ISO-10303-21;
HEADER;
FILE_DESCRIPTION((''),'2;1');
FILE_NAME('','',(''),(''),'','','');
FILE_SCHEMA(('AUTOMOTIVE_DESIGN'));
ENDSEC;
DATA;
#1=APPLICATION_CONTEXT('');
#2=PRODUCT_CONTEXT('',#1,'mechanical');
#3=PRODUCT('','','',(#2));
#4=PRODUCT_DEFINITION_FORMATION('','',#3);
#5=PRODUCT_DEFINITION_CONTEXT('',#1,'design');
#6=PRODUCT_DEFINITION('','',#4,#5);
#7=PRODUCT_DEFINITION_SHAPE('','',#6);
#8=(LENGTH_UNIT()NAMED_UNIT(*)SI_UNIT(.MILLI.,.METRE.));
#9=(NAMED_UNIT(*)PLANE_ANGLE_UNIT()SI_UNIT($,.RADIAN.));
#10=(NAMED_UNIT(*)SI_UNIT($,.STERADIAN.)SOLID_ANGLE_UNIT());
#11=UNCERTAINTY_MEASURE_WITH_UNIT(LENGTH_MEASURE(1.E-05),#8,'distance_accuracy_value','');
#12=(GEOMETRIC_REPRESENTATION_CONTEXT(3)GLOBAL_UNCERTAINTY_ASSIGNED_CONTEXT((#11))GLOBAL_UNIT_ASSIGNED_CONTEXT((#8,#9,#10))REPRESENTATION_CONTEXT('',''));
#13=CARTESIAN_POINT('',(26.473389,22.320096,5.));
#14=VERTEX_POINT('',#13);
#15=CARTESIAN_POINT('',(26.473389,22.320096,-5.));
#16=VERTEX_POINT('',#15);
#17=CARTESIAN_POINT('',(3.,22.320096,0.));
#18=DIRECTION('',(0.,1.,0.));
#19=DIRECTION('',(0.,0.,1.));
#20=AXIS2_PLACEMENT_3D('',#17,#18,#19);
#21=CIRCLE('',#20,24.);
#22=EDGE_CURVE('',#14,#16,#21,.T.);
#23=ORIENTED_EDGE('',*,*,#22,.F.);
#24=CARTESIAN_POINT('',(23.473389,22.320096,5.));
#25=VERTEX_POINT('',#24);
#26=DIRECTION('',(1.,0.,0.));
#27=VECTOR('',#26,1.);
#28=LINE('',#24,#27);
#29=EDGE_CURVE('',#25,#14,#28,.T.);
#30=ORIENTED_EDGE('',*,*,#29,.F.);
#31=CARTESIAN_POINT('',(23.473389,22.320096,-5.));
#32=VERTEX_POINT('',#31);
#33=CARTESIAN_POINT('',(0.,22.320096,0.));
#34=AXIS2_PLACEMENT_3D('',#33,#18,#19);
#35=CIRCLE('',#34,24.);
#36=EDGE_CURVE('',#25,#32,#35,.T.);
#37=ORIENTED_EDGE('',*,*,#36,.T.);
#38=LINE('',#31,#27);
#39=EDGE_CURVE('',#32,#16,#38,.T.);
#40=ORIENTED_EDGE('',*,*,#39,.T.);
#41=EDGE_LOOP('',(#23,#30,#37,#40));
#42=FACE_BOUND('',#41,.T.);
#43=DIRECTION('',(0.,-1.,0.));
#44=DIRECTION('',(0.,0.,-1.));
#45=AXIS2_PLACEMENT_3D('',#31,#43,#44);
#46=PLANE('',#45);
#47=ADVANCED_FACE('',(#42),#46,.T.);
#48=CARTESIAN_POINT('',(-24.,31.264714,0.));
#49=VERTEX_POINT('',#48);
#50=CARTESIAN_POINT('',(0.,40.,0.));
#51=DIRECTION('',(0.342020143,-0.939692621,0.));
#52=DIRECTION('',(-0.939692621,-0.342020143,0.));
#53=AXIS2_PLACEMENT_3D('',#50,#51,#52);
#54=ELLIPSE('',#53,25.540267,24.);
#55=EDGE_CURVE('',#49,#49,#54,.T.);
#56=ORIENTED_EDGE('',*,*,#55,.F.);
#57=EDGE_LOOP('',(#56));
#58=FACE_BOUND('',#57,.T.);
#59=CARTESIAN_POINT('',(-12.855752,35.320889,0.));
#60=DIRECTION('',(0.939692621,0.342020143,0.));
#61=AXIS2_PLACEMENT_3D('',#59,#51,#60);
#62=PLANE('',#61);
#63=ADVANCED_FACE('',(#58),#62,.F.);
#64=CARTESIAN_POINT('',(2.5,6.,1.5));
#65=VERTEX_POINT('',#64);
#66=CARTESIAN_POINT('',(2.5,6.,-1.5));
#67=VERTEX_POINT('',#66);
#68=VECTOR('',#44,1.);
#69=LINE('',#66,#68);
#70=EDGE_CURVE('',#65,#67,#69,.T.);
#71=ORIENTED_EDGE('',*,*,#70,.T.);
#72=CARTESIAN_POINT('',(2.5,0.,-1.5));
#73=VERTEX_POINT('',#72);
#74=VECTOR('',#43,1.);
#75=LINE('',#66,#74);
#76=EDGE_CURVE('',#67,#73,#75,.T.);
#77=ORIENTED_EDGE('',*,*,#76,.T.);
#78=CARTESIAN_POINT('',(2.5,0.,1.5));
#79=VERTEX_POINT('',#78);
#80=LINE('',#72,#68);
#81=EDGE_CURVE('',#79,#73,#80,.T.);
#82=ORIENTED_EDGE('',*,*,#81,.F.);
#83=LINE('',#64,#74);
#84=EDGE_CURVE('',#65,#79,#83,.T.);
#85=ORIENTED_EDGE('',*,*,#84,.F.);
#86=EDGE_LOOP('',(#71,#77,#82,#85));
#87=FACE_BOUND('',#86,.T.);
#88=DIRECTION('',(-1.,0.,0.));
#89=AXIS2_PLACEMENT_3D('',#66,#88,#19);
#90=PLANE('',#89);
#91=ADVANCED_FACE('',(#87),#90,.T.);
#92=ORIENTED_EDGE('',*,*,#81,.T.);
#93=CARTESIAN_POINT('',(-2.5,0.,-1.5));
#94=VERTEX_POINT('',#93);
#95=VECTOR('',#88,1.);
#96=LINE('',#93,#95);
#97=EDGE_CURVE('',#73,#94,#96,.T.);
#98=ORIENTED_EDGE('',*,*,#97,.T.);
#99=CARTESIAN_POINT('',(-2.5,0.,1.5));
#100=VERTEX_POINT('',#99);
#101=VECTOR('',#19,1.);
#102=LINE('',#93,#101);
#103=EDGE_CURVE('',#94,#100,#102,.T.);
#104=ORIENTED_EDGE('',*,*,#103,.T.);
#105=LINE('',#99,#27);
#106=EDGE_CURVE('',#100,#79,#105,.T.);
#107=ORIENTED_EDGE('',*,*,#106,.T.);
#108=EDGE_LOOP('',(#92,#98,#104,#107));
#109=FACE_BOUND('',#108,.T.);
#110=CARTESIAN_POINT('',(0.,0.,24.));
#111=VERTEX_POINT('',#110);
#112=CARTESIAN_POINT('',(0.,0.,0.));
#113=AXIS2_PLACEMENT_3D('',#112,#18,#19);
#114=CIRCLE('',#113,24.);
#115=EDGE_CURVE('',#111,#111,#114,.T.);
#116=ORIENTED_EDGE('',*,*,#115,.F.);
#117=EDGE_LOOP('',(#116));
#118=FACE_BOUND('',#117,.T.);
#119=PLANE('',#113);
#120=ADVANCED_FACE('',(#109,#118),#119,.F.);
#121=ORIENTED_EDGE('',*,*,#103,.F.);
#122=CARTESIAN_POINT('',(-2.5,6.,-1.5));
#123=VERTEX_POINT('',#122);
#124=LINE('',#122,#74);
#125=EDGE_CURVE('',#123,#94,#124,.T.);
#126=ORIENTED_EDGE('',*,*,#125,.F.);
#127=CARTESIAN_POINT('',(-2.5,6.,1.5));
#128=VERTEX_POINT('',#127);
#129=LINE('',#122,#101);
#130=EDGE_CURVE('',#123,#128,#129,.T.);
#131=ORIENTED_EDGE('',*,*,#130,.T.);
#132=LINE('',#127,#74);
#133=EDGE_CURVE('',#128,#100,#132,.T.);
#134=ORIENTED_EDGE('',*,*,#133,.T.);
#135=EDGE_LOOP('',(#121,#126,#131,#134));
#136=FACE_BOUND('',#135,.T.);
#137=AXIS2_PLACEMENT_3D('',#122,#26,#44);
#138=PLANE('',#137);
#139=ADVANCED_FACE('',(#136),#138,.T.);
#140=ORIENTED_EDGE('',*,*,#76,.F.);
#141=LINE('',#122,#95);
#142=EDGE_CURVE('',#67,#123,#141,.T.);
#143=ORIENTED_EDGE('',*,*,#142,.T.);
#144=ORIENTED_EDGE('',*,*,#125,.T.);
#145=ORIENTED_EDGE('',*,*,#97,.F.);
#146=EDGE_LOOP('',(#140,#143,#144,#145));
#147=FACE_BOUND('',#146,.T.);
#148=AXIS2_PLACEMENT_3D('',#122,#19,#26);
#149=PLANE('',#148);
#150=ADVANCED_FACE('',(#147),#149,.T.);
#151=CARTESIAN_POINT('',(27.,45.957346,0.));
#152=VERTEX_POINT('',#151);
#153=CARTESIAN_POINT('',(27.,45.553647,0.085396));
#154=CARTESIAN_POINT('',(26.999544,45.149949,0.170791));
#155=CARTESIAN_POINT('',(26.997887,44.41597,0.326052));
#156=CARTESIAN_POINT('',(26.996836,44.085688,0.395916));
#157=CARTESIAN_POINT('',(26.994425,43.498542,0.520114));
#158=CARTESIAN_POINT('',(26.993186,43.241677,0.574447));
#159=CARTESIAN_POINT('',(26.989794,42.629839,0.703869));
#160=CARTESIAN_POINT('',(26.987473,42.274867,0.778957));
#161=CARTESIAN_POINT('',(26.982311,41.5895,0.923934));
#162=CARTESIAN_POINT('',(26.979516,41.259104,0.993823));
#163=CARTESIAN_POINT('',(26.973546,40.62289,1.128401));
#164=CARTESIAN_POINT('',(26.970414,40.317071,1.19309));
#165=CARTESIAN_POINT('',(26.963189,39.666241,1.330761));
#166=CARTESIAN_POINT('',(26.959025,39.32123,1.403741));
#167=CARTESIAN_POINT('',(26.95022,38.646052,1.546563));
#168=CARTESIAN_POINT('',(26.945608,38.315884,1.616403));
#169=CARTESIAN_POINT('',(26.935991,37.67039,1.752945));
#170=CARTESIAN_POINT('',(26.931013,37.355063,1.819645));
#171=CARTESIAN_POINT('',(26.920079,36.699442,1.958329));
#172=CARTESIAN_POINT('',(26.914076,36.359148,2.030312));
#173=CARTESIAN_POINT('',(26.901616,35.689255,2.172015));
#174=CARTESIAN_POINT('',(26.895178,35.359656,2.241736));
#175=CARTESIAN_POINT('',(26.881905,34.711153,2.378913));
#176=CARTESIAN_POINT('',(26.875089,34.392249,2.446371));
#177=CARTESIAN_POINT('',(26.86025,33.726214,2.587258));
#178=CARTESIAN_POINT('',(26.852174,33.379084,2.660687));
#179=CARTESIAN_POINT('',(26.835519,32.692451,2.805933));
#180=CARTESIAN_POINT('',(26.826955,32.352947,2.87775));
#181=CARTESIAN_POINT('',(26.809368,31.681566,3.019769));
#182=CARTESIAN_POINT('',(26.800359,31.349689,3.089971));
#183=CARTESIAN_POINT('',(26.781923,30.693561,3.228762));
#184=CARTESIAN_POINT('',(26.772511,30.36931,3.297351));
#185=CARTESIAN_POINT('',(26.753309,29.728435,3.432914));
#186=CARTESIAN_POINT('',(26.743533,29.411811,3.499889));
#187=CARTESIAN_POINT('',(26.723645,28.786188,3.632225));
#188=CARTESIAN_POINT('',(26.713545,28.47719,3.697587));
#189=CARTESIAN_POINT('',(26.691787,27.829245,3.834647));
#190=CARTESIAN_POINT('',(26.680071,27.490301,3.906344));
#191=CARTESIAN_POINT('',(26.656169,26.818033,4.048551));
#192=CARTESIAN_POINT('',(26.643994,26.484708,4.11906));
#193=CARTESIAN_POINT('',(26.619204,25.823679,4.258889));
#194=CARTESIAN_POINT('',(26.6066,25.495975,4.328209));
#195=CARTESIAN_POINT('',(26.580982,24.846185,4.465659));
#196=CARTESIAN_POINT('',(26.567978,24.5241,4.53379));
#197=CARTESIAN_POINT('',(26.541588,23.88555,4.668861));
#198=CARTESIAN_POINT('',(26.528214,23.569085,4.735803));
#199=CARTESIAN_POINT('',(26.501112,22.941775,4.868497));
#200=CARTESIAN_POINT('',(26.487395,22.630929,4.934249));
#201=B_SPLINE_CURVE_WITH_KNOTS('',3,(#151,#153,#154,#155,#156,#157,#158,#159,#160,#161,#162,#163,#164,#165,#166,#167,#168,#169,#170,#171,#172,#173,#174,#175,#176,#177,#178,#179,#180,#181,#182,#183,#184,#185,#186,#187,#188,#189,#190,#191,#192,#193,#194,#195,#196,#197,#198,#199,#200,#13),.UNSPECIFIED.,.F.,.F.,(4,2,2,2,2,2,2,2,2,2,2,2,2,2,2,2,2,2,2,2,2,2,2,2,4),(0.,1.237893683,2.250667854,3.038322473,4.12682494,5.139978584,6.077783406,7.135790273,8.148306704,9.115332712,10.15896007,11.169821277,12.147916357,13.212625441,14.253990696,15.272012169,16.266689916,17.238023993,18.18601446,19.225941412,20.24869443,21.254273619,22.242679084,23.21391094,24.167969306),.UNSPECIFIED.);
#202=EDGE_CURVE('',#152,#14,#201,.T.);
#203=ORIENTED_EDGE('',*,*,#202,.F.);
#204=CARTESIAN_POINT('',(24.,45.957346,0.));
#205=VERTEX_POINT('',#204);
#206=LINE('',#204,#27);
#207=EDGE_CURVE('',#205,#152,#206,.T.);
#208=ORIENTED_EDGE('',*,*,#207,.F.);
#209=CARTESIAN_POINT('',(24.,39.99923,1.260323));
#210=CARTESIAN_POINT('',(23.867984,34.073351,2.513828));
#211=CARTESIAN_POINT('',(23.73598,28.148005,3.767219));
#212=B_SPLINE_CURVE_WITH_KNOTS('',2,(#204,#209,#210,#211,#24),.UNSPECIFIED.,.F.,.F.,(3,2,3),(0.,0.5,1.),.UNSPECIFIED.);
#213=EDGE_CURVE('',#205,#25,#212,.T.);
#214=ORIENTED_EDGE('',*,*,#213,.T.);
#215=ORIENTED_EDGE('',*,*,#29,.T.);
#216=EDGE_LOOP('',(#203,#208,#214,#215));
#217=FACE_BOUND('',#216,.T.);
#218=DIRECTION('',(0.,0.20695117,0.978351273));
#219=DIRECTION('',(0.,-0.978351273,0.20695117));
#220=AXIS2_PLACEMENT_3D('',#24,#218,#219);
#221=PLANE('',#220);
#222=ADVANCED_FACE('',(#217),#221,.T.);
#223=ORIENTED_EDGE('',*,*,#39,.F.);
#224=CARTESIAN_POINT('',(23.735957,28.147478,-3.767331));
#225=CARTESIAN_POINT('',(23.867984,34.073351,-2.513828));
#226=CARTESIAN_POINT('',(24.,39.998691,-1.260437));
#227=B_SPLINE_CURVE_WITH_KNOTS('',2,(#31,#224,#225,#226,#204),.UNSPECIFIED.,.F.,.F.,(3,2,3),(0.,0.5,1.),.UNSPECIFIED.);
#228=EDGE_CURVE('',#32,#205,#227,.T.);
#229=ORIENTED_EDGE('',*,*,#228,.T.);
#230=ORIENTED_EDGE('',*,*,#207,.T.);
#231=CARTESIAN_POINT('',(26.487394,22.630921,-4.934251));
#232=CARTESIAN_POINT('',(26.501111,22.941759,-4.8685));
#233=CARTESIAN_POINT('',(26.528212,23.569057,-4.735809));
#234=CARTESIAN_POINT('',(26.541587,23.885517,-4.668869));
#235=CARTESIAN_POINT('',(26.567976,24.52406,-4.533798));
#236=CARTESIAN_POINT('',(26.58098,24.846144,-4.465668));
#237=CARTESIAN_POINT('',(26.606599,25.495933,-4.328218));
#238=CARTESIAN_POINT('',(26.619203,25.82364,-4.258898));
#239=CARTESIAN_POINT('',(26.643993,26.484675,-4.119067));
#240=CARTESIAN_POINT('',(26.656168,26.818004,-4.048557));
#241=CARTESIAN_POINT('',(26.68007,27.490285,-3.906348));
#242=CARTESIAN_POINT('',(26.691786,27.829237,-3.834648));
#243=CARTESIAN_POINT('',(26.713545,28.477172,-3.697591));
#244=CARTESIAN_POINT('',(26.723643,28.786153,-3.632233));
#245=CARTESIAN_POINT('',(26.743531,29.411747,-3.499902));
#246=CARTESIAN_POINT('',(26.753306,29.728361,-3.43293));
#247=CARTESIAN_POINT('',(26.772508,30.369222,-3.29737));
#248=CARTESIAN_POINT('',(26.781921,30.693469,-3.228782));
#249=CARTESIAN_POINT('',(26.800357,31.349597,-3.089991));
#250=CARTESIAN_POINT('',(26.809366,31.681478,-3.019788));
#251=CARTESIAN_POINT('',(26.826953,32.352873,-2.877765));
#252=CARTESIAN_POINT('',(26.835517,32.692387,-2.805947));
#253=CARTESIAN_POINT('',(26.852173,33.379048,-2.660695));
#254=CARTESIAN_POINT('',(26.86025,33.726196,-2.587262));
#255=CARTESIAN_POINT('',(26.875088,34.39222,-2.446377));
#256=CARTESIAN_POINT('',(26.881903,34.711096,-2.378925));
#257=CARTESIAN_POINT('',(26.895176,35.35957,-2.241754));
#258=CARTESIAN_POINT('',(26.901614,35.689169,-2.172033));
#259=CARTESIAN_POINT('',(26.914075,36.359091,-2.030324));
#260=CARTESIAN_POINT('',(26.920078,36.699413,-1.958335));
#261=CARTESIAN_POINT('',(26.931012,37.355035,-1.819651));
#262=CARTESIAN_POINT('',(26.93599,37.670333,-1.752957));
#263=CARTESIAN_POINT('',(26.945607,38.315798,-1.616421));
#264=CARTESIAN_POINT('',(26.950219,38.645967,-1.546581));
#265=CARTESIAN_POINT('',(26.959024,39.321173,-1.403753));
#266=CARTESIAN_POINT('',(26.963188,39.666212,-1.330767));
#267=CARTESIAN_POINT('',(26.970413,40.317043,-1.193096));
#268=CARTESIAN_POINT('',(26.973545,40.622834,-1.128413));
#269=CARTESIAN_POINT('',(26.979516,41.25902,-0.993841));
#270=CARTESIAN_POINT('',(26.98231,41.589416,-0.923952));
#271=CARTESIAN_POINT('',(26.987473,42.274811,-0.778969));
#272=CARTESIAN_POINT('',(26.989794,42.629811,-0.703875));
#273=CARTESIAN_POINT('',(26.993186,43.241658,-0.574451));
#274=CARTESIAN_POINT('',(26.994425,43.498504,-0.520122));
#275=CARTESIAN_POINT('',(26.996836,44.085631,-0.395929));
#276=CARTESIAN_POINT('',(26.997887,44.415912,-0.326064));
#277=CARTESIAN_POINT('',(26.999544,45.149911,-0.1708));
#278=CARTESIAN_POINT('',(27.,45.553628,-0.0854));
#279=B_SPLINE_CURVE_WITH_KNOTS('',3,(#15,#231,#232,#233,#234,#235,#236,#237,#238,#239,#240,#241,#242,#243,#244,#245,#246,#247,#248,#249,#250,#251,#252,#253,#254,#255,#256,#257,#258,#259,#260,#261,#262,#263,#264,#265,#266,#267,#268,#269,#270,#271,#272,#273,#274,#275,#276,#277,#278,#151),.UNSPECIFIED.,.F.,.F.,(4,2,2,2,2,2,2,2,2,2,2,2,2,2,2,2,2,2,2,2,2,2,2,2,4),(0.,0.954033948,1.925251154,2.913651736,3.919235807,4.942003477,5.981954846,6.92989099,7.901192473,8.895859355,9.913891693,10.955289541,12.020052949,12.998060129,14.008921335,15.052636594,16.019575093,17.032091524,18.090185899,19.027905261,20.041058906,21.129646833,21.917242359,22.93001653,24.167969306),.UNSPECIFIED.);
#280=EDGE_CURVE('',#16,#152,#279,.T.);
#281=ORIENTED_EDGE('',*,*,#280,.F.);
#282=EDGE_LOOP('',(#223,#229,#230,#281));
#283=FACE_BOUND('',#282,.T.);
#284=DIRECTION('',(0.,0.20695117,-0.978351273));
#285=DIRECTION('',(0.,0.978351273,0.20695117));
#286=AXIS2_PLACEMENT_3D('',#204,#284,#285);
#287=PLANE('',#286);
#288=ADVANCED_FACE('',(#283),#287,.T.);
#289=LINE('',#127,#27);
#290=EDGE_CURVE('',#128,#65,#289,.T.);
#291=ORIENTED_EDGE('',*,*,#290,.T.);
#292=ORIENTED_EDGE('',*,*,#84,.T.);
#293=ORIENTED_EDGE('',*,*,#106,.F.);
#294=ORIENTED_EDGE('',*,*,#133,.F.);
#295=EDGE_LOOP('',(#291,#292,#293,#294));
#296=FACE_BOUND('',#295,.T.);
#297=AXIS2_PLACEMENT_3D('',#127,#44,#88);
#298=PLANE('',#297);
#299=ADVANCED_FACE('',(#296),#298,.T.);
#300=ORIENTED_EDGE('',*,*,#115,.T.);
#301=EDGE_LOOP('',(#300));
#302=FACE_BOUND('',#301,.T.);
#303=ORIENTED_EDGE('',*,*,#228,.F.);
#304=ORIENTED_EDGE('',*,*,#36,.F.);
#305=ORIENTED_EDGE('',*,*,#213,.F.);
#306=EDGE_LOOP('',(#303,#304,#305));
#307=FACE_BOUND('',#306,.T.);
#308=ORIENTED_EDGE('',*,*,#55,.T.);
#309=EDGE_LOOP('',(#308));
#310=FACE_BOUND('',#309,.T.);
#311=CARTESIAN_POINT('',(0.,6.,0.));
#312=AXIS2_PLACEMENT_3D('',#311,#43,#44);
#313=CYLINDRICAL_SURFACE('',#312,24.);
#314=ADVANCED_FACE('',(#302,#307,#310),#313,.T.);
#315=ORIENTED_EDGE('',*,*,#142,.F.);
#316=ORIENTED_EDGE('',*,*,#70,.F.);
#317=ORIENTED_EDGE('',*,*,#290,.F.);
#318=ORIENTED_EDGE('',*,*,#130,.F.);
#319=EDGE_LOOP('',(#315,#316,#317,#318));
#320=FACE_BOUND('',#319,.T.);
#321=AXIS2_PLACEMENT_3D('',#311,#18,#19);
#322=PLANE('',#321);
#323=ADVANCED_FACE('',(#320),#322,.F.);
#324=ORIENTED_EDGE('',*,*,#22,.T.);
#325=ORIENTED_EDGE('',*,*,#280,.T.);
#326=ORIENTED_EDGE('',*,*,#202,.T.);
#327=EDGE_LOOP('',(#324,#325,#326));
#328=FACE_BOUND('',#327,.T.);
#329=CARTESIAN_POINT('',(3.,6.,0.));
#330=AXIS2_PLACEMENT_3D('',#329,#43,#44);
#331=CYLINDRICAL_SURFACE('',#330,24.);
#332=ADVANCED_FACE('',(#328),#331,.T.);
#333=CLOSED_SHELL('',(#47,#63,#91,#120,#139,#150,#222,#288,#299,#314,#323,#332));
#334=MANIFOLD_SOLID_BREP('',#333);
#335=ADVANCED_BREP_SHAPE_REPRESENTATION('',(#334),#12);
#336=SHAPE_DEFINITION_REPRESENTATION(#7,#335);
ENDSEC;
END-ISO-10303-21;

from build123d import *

# Parameters (mm, degrees)
SKETCH1_R                  = 24
SKETCH1_W                  = 5
SKETCH1_H                  = 3
BOSS_EXTRUDE1_DEPTH        = 6
BOSS_EXTRUDE4_OUTLINE_R    = 24
BOSS_EXTRUDE4_DEPTH        = 25.264714378
BOSS_EXTRUDE4_START        = 31.264714378
BOSS_EXTRUDE4_2_OUTLINE_R  = 24
BOSS_EXTRUDE4_2_DEPTH      = 17.470571244
BOSS_EXTRUDE4_START_2      = -55
BOSS_EXTRUDE4_3_OUTLINE_W  = 54
BOSS_EXTRUDE4_3_OUTLINE_H  = 50
BOSS_EXTRUDE4_3_DEPTH      = 17.412295169
BOSS_EXTRUDE5_REACH        = 64.39
BOSS_EXTRUDE5_START_RADIUS = 24
BOSS_EXTRUDE5_END_RADIUS   = 24


with BuildPart() as part:
    # Sketch1 → Boss-Extrude1 (new body)
    with BuildSketch(Plane(origin=(0, 0, 0), x_dir=(1, 0, 0), z_dir=(0, 1, 0))):
        with Locations(Location((0, 0, 0), (0, 0, 270))):
            Circle(SKETCH1_R)
        Rectangle(SKETCH1_W, SKETCH1_H, mode=Mode.SUBTRACT)
    extrude(amount=BOSS_EXTRUDE1_DEPTH)

    # Boss-Extrude4: read off the stored shape, not the designer's step
    # Boss-Extrude4 outline → Boss-Extrude4 (add)
    with BuildSketch(Plane(origin=(0, 6, 0), x_dir=(1, 0, 0), z_dir=(0, 1, 0))):
        Circle(BOSS_EXTRUDE4_OUTLINE_R)
    extrude(amount=BOSS_EXTRUDE4_DEPTH)

    # Boss-Extrude4 2 outline → Boss-Extrude4 2 (add)
    with BuildSketch(Plane(origin=(0, 0, 0), x_dir=(1, 0, 0), z_dir=(0, 1, 0)).offset(BOSS_EXTRUDE4_START)):
        Circle(BOSS_EXTRUDE4_2_OUTLINE_R)
    extrude(amount=BOSS_EXTRUDE4_2_DEPTH)

    # Boss-Extrude4 3 outline → Boss-Extrude4 3 (cut)
    with BuildSketch(Plane(origin=(0, 0, 0), x_dir=(0.9396926207859082, 0.3420201433256691, 0), z_dir=(0.3420201433256691, -0.9396926207859083, 0)).offset(BOSS_EXTRUDE4_START_2)):
        with Locations((14, 0)):
            Rectangle(BOSS_EXTRUDE4_3_OUTLINE_W, BOSS_EXTRUDE4_3_OUTLINE_H)
    extrude(amount=BOSS_EXTRUDE4_3_DEPTH, mode=Mode.SUBTRACT)

    # Boss-Extrude5: from a cylinder face, 64.39 long prism both ways, kept between that surface and its translate by the depth
    boss_extrude5_start = Plane(origin=(0, 30.19918, 0), z_dir=(0, -1, 0)) * Cylinder(BOSS_EXTRUDE5_START_RADIUS, 177.78, mode=Mode.PRIVATE)
    boss_extrude5_end = Plane(origin=(3, 30.19918, 0), z_dir=(0, -1, 0)) * Cylinder(BOSS_EXTRUDE5_END_RADIUS, 177.78, mode=Mode.PRIVATE)
    # Sketch5 → Boss-Extrude5 (add, from a surface)
    with BuildSketch(Plane(origin=(0, 0, 0), x_dir=(0, 0, -1), z_dir=(1, 0, 0)), mode=Mode.PRIVATE) as boss_extrude5_sk1:
        Polygon((0, 45.957345566), (-5, 22.320096474), (5, 22.320096474), align=None)
    boss_extrude5_tool1 = extrude(boss_extrude5_sk1.sketch, amount=BOSS_EXTRUDE5_REACH, both=True, mode=Mode.PRIVATE)
    add(((boss_extrude5_tool1 - boss_extrude5_start) & boss_extrude5_end).solids().sort_by_distance((25.236695, 30.19918, 0))[0])


solid = part.part
